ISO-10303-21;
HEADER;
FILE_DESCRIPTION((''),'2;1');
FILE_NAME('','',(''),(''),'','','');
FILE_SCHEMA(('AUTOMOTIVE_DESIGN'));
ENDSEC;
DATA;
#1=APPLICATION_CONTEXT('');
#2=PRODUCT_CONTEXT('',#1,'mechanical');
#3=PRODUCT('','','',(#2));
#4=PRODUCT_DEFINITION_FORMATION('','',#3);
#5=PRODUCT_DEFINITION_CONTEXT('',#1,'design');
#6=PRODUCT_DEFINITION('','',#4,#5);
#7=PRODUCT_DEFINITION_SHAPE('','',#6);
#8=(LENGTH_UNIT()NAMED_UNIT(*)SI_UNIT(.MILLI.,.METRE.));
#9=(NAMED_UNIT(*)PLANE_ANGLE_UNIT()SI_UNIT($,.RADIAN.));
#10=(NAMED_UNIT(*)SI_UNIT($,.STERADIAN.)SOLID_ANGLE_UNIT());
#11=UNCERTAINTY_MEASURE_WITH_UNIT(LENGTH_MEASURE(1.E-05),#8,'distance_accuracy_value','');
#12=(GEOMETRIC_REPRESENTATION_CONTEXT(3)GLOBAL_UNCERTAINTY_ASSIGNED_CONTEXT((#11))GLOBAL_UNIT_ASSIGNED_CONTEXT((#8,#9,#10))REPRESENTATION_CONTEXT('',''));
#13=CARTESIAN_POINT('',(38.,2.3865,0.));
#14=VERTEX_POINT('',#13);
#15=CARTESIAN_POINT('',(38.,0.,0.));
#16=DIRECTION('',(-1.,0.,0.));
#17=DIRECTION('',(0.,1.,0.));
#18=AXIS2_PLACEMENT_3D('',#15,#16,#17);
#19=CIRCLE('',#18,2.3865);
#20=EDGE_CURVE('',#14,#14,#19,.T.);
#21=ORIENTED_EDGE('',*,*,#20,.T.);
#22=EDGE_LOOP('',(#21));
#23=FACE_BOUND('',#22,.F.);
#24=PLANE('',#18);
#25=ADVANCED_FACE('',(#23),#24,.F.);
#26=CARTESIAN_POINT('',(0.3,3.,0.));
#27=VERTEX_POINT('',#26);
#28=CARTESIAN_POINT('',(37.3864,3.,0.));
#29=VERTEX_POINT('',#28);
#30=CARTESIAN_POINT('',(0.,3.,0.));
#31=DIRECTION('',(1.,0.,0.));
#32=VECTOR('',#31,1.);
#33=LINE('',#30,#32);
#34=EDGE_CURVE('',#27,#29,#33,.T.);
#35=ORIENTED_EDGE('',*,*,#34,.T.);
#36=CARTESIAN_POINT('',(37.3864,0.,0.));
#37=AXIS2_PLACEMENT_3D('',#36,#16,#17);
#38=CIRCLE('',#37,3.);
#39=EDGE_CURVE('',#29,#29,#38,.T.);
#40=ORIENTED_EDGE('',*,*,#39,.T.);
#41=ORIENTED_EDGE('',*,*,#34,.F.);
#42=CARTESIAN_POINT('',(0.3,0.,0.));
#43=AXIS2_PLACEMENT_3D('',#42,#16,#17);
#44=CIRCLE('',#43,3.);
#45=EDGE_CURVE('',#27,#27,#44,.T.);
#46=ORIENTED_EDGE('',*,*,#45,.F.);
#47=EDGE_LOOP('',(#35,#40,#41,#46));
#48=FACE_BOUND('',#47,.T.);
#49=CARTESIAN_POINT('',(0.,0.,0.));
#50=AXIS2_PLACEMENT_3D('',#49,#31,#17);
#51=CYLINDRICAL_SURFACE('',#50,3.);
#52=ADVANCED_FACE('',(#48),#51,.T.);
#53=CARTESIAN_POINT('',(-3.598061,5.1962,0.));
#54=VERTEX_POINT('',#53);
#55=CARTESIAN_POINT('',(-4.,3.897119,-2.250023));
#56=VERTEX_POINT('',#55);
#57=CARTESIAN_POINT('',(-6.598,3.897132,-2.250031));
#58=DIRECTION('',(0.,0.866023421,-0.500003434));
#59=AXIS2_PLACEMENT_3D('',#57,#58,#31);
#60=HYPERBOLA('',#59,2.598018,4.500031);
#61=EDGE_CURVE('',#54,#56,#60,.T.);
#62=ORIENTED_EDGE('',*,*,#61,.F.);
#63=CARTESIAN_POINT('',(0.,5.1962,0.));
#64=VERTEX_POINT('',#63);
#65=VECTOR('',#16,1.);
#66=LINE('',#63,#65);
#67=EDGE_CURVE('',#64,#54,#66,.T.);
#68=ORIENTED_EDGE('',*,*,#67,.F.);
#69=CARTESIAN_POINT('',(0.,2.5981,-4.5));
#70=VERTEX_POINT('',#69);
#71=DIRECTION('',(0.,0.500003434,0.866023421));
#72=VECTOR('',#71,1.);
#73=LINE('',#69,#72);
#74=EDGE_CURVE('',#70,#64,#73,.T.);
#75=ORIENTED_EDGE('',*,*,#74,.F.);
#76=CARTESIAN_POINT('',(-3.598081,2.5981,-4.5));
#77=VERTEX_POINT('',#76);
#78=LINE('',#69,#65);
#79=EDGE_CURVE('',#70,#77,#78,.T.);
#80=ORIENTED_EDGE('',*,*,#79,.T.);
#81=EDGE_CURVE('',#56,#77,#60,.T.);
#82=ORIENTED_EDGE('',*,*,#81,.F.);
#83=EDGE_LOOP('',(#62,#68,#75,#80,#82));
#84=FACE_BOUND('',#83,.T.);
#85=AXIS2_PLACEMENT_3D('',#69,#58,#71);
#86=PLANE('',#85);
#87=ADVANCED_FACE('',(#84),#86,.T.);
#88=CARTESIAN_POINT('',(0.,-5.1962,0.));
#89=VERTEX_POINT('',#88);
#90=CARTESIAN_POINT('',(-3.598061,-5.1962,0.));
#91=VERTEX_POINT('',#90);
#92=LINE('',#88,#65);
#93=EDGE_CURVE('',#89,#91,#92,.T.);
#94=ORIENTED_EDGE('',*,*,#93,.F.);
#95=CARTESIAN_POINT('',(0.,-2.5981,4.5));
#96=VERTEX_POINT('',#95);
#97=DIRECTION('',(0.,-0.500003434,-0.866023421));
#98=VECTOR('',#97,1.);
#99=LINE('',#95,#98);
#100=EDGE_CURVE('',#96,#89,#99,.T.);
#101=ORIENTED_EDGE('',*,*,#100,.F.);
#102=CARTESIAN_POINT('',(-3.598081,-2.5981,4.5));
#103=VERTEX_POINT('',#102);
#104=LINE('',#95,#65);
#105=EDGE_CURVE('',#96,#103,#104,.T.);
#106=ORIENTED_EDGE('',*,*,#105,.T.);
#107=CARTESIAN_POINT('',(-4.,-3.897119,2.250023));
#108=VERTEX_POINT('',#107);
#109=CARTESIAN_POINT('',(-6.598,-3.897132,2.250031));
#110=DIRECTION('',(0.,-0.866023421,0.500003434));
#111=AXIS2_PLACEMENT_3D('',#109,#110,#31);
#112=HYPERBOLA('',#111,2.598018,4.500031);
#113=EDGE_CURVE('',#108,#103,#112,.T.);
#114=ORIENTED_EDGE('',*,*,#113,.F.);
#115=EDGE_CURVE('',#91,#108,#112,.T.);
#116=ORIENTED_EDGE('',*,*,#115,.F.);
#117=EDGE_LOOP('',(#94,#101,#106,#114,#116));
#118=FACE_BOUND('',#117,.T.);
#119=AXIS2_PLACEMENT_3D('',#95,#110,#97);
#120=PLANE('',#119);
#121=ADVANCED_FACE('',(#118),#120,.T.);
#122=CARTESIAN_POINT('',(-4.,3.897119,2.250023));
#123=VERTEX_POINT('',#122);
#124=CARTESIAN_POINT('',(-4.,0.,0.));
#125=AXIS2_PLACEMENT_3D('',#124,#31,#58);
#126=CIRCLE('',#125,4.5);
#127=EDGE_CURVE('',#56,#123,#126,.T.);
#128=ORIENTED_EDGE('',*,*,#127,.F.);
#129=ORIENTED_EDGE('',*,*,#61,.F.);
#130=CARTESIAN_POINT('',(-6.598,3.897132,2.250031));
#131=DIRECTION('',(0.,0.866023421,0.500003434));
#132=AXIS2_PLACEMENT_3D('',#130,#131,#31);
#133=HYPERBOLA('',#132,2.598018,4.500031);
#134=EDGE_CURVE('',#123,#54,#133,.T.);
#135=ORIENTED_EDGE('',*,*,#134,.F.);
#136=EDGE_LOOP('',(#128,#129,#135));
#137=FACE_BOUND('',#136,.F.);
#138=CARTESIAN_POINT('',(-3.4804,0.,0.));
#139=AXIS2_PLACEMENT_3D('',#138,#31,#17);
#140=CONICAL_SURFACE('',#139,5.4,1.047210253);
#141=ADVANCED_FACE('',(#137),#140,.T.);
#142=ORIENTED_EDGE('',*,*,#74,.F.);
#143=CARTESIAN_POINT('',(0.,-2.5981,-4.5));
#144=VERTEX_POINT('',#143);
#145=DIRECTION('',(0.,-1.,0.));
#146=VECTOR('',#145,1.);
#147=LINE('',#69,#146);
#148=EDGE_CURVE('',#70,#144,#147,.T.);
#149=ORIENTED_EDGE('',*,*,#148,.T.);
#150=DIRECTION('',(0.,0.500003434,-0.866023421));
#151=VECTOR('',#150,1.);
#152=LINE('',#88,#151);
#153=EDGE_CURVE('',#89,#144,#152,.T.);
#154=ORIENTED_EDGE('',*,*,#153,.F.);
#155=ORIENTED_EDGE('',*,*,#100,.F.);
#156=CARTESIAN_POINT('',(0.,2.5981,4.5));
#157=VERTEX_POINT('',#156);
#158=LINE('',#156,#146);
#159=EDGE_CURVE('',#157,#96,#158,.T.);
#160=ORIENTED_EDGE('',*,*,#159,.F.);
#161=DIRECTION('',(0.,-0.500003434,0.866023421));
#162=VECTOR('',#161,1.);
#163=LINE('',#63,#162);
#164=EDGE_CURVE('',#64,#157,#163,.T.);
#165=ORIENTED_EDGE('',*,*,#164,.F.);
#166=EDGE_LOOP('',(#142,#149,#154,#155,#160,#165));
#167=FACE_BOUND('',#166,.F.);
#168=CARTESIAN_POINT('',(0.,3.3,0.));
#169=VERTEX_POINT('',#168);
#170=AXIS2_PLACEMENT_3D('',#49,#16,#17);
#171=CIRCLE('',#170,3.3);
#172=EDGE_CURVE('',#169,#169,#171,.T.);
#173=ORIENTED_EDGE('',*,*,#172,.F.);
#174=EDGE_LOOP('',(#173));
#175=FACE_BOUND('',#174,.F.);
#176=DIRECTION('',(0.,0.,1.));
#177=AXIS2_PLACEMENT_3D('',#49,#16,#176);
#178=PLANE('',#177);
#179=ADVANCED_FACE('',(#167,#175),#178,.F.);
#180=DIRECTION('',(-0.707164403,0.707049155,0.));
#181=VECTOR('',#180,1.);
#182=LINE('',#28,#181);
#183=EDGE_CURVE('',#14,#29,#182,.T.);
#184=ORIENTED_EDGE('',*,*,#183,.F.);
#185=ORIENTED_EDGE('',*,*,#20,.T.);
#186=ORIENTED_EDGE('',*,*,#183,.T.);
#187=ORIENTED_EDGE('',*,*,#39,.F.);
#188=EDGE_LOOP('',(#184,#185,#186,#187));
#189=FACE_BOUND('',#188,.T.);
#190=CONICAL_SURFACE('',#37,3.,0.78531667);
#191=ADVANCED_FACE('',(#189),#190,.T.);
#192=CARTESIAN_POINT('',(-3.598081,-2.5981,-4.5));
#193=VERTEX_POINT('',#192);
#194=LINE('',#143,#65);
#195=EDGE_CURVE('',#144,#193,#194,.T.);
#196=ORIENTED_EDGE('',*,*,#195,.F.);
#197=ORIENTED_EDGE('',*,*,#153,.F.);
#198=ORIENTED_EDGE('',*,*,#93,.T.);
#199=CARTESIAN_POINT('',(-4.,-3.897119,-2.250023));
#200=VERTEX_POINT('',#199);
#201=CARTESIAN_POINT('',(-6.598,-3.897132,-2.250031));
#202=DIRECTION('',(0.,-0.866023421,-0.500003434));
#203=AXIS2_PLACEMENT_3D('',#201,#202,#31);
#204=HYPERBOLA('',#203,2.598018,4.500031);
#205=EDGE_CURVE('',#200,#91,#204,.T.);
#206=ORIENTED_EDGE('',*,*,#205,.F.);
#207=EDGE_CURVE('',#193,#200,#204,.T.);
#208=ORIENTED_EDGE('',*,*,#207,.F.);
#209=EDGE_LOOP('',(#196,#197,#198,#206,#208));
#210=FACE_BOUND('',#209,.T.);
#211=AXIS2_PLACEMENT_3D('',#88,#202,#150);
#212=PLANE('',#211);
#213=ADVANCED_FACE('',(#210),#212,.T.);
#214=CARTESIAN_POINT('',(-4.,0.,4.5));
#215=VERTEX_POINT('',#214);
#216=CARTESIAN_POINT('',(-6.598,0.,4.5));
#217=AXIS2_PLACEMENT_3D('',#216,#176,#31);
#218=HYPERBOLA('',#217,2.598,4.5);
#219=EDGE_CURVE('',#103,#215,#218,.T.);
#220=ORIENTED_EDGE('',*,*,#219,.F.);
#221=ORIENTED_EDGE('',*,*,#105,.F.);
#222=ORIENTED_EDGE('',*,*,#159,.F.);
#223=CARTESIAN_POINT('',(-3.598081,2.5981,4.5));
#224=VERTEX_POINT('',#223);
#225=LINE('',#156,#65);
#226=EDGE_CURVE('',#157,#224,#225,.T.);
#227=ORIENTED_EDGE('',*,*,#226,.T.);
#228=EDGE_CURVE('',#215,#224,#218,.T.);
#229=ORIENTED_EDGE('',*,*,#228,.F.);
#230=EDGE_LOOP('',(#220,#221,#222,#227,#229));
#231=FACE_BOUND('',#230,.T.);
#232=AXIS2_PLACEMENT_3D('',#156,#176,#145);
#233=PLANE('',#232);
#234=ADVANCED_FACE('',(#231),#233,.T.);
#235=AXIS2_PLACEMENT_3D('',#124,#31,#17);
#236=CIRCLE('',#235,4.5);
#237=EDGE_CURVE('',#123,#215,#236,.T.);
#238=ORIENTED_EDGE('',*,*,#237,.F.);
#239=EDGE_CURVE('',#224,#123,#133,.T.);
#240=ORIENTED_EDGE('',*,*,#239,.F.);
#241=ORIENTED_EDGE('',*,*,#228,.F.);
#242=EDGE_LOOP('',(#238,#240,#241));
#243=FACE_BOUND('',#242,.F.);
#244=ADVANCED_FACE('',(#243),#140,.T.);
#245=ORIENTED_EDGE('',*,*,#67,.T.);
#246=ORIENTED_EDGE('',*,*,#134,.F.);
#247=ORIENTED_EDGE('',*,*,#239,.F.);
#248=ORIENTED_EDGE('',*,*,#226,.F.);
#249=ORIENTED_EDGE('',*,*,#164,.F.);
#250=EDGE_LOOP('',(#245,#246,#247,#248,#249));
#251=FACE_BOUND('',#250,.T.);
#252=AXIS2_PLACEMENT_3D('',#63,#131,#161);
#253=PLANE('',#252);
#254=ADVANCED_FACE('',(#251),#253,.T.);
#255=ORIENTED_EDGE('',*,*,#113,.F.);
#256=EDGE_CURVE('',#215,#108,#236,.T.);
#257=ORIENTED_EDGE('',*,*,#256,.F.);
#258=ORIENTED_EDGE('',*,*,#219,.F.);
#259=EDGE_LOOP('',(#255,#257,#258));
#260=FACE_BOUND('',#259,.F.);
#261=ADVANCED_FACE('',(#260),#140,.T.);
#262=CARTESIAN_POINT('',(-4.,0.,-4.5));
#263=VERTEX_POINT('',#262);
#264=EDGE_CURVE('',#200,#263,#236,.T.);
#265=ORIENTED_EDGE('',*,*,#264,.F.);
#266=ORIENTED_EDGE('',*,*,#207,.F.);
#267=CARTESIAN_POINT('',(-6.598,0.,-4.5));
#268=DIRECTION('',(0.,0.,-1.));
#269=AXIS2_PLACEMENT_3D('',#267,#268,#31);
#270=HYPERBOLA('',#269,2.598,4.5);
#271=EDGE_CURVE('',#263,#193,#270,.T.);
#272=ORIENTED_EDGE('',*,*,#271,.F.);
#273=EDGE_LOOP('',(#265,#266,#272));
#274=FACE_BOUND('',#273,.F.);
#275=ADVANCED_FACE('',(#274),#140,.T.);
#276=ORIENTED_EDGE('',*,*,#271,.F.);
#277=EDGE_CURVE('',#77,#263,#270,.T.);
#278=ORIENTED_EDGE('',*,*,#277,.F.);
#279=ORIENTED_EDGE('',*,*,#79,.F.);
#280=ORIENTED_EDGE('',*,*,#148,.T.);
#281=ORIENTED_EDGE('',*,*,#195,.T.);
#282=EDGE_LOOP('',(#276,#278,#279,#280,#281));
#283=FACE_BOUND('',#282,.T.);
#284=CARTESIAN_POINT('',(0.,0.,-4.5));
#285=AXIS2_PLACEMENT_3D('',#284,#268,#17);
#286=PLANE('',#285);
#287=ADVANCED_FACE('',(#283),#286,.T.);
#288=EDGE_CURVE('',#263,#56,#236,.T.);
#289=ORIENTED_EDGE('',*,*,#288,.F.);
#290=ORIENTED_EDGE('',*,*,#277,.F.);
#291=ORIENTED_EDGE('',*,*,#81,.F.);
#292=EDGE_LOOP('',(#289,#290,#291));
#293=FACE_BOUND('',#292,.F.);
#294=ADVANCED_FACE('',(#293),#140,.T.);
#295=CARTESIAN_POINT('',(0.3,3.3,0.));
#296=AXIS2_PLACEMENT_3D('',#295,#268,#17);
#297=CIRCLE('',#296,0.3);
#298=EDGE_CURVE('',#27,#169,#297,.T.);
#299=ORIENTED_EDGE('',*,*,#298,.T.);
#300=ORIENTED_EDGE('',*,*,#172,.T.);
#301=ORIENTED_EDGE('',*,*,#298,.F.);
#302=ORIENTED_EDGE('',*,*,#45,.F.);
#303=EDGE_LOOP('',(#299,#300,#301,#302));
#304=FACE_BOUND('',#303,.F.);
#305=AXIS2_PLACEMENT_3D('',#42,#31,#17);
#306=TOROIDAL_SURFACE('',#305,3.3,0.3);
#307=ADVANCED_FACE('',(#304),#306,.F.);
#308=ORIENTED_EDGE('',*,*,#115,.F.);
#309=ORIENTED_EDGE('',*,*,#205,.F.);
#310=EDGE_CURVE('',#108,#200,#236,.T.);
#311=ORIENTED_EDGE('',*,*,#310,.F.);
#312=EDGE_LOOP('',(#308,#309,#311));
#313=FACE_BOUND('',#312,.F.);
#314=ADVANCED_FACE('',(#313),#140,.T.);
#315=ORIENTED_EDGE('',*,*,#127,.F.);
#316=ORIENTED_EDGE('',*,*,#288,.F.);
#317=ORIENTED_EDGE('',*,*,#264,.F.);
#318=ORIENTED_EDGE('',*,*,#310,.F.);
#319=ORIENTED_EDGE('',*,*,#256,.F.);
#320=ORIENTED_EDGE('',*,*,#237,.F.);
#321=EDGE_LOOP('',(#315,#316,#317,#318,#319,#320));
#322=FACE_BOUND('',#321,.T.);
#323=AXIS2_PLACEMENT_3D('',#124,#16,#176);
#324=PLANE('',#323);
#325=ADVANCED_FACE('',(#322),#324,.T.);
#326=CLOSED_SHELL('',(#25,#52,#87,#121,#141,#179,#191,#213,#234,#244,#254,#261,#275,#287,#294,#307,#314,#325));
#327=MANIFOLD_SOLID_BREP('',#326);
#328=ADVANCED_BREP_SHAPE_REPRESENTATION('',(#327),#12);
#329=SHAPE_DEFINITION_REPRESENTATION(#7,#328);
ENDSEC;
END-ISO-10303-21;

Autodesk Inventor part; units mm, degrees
ref_plane "YZ Plane" through (0, 0, 0) normal (1, 0, 0) x (0, 1, 0)
ref_plane "XZ Plane" through (0, 0, 0) normal (0, 1, 0) x (-1, 0, 0)
sketch "Sketch1" plane through (0, 0, 0) normal (0, 0, 1) x (1, 0, 0)
  line L0 (0, 3) -> (38, 3)
  line L1 (38, 3) -> (38, 0)
  line L2 (38, 0) -> (0, 0)
  line L3 (-7.6, 0) -> (45.6, 0) projected
  line L4 (0, -0.6) -> (0, 3.6) projected
  line L5 (0, 3) -> (0, 0)
  dimension "d2" = 6
  dimension "d59" = 38
revolve "Body" add sketch "Sketch1" angle 360 about axis through (38, 0, 0) along (-1, 0, 0)
sketch "Sketch2" plane through (0, 0, 0) normal (-1, 0, 0) x (0, 0, 1)
  line L0 (0, 5.1962) -> (4.5, 2.5981)
  line L1 (4.5, 2.5981) -> (4.5, -2.5981)
  line L2 (4.5, -2.5981) -> (0, -5.1962)
  line L3 (0, -5.1962) -> (-4.5, -2.5981)
  line L4 (-4.5, -2.5981) -> (-4.5, 2.5981)
  line L5 (-4.5, 2.5981) -> (0, 5.1962)
  line L6 (-6.3, 0) -> (6.3, 0) projected
  line L7 (0, 7.2746) -> (0, -7.2746) projected
  point P0 (0, 0)
  point P1 (0, 0)
  dimension "d11" = 9
extrude "Head" add sketch "Sketch2" along normal blind 4
sketch "Sketch4" plane through (0, 0, 0) normal (0, 0, 1) x (1, 0, 0)
  line L0 (-3.4804, 5.4) -> (-4, 4.5)
  line L1 (-1.1, 0) -> (-0.234, 0)
  line L2 (-4.7532, 0) -> (0.5192, 0) projected
  line L3 (-4, 5.4) -> (-3.4804, 5.4)
  line L4 (-4, 4.5) -> (-4, 5.4)
  line L5 (0, 6.48) -> (0, -1.08) projected
  dimension "d65" = 9
  dimension "d67" = 30
  dimension "d68" = 10.8
  dimension "d69" = 4
revolve "Chamfer1" cut sketch "Sketch4" angle 360 about axis through (-1.1, 0, 0) along (1, 0, 0)
thread "Thread" size "M6x1" class "6g" standard "ISO Metric profile" length 11
chamfer "Chamfer2" distance 0.6135 distance2 0.6136 1 edges at (38, -3, 0) measured on face at (38, 0.7485, -0.9828)
fillet "Fillet2" radius 0.3 1 edges at (0, -3, 0)
ref_plane "Work Plane1" through (1.525, 0, 0) normal (0, 0, 1) x (1, 0, 0)
equation "\"d71\" = RR"
equation "\"d11\" = SW"
equation "\"d3\" = KOH"
equation "\"d15\" = GEL"
equation "\"d6\" = -0.5 * SPD + 0.5 * GD"
equation "\"d2\" = GD"
equation "\"d59\" = NLG"
equation "\"d65\" = SW"
equation "\"d67\" = ANG1"
equation "\"d68\" = 1.2 * SW"
equation "\"d69\" = KOH"
equation "\"NLG\" = 38"
equation "\"GD\" = NND"
equation "\"BDM\" = NND"
equation "\"KOH\" = 4"
equation "\"GEL\" = 11"
equation "\"SW\" = 9"
equation "\"SW0\" = 9"
equation "\"SPD\" = NND - 1.2269 * PTC"
equation "\"SD2\" = NND"
equation "\"SD\" = 0"
equation "\"ANG1\" = 30deg"
equation "\"GAL\" = 0.61345 * PTC"
equation "\"GUL\" = 0.61345 * PTC"
equation "\"RR\" = 0.3"
equation "\"RR1\" = 0.1"
equation "\"GD1\" = THREADDIA - 1.2269 * PTC"
equation "\"THREADDIA\" = 6"
equation "\"TOA\" = 30deg"
equation "\"FAWI\" = 60deg"
equation "\"PTC\" = 1"
equation "\"NND\" = 6"
equation "\"E0\" = 1.155 * SW"
properties part number "CSN 02 1201 - M6 x 38" material "Steel, Mild"
